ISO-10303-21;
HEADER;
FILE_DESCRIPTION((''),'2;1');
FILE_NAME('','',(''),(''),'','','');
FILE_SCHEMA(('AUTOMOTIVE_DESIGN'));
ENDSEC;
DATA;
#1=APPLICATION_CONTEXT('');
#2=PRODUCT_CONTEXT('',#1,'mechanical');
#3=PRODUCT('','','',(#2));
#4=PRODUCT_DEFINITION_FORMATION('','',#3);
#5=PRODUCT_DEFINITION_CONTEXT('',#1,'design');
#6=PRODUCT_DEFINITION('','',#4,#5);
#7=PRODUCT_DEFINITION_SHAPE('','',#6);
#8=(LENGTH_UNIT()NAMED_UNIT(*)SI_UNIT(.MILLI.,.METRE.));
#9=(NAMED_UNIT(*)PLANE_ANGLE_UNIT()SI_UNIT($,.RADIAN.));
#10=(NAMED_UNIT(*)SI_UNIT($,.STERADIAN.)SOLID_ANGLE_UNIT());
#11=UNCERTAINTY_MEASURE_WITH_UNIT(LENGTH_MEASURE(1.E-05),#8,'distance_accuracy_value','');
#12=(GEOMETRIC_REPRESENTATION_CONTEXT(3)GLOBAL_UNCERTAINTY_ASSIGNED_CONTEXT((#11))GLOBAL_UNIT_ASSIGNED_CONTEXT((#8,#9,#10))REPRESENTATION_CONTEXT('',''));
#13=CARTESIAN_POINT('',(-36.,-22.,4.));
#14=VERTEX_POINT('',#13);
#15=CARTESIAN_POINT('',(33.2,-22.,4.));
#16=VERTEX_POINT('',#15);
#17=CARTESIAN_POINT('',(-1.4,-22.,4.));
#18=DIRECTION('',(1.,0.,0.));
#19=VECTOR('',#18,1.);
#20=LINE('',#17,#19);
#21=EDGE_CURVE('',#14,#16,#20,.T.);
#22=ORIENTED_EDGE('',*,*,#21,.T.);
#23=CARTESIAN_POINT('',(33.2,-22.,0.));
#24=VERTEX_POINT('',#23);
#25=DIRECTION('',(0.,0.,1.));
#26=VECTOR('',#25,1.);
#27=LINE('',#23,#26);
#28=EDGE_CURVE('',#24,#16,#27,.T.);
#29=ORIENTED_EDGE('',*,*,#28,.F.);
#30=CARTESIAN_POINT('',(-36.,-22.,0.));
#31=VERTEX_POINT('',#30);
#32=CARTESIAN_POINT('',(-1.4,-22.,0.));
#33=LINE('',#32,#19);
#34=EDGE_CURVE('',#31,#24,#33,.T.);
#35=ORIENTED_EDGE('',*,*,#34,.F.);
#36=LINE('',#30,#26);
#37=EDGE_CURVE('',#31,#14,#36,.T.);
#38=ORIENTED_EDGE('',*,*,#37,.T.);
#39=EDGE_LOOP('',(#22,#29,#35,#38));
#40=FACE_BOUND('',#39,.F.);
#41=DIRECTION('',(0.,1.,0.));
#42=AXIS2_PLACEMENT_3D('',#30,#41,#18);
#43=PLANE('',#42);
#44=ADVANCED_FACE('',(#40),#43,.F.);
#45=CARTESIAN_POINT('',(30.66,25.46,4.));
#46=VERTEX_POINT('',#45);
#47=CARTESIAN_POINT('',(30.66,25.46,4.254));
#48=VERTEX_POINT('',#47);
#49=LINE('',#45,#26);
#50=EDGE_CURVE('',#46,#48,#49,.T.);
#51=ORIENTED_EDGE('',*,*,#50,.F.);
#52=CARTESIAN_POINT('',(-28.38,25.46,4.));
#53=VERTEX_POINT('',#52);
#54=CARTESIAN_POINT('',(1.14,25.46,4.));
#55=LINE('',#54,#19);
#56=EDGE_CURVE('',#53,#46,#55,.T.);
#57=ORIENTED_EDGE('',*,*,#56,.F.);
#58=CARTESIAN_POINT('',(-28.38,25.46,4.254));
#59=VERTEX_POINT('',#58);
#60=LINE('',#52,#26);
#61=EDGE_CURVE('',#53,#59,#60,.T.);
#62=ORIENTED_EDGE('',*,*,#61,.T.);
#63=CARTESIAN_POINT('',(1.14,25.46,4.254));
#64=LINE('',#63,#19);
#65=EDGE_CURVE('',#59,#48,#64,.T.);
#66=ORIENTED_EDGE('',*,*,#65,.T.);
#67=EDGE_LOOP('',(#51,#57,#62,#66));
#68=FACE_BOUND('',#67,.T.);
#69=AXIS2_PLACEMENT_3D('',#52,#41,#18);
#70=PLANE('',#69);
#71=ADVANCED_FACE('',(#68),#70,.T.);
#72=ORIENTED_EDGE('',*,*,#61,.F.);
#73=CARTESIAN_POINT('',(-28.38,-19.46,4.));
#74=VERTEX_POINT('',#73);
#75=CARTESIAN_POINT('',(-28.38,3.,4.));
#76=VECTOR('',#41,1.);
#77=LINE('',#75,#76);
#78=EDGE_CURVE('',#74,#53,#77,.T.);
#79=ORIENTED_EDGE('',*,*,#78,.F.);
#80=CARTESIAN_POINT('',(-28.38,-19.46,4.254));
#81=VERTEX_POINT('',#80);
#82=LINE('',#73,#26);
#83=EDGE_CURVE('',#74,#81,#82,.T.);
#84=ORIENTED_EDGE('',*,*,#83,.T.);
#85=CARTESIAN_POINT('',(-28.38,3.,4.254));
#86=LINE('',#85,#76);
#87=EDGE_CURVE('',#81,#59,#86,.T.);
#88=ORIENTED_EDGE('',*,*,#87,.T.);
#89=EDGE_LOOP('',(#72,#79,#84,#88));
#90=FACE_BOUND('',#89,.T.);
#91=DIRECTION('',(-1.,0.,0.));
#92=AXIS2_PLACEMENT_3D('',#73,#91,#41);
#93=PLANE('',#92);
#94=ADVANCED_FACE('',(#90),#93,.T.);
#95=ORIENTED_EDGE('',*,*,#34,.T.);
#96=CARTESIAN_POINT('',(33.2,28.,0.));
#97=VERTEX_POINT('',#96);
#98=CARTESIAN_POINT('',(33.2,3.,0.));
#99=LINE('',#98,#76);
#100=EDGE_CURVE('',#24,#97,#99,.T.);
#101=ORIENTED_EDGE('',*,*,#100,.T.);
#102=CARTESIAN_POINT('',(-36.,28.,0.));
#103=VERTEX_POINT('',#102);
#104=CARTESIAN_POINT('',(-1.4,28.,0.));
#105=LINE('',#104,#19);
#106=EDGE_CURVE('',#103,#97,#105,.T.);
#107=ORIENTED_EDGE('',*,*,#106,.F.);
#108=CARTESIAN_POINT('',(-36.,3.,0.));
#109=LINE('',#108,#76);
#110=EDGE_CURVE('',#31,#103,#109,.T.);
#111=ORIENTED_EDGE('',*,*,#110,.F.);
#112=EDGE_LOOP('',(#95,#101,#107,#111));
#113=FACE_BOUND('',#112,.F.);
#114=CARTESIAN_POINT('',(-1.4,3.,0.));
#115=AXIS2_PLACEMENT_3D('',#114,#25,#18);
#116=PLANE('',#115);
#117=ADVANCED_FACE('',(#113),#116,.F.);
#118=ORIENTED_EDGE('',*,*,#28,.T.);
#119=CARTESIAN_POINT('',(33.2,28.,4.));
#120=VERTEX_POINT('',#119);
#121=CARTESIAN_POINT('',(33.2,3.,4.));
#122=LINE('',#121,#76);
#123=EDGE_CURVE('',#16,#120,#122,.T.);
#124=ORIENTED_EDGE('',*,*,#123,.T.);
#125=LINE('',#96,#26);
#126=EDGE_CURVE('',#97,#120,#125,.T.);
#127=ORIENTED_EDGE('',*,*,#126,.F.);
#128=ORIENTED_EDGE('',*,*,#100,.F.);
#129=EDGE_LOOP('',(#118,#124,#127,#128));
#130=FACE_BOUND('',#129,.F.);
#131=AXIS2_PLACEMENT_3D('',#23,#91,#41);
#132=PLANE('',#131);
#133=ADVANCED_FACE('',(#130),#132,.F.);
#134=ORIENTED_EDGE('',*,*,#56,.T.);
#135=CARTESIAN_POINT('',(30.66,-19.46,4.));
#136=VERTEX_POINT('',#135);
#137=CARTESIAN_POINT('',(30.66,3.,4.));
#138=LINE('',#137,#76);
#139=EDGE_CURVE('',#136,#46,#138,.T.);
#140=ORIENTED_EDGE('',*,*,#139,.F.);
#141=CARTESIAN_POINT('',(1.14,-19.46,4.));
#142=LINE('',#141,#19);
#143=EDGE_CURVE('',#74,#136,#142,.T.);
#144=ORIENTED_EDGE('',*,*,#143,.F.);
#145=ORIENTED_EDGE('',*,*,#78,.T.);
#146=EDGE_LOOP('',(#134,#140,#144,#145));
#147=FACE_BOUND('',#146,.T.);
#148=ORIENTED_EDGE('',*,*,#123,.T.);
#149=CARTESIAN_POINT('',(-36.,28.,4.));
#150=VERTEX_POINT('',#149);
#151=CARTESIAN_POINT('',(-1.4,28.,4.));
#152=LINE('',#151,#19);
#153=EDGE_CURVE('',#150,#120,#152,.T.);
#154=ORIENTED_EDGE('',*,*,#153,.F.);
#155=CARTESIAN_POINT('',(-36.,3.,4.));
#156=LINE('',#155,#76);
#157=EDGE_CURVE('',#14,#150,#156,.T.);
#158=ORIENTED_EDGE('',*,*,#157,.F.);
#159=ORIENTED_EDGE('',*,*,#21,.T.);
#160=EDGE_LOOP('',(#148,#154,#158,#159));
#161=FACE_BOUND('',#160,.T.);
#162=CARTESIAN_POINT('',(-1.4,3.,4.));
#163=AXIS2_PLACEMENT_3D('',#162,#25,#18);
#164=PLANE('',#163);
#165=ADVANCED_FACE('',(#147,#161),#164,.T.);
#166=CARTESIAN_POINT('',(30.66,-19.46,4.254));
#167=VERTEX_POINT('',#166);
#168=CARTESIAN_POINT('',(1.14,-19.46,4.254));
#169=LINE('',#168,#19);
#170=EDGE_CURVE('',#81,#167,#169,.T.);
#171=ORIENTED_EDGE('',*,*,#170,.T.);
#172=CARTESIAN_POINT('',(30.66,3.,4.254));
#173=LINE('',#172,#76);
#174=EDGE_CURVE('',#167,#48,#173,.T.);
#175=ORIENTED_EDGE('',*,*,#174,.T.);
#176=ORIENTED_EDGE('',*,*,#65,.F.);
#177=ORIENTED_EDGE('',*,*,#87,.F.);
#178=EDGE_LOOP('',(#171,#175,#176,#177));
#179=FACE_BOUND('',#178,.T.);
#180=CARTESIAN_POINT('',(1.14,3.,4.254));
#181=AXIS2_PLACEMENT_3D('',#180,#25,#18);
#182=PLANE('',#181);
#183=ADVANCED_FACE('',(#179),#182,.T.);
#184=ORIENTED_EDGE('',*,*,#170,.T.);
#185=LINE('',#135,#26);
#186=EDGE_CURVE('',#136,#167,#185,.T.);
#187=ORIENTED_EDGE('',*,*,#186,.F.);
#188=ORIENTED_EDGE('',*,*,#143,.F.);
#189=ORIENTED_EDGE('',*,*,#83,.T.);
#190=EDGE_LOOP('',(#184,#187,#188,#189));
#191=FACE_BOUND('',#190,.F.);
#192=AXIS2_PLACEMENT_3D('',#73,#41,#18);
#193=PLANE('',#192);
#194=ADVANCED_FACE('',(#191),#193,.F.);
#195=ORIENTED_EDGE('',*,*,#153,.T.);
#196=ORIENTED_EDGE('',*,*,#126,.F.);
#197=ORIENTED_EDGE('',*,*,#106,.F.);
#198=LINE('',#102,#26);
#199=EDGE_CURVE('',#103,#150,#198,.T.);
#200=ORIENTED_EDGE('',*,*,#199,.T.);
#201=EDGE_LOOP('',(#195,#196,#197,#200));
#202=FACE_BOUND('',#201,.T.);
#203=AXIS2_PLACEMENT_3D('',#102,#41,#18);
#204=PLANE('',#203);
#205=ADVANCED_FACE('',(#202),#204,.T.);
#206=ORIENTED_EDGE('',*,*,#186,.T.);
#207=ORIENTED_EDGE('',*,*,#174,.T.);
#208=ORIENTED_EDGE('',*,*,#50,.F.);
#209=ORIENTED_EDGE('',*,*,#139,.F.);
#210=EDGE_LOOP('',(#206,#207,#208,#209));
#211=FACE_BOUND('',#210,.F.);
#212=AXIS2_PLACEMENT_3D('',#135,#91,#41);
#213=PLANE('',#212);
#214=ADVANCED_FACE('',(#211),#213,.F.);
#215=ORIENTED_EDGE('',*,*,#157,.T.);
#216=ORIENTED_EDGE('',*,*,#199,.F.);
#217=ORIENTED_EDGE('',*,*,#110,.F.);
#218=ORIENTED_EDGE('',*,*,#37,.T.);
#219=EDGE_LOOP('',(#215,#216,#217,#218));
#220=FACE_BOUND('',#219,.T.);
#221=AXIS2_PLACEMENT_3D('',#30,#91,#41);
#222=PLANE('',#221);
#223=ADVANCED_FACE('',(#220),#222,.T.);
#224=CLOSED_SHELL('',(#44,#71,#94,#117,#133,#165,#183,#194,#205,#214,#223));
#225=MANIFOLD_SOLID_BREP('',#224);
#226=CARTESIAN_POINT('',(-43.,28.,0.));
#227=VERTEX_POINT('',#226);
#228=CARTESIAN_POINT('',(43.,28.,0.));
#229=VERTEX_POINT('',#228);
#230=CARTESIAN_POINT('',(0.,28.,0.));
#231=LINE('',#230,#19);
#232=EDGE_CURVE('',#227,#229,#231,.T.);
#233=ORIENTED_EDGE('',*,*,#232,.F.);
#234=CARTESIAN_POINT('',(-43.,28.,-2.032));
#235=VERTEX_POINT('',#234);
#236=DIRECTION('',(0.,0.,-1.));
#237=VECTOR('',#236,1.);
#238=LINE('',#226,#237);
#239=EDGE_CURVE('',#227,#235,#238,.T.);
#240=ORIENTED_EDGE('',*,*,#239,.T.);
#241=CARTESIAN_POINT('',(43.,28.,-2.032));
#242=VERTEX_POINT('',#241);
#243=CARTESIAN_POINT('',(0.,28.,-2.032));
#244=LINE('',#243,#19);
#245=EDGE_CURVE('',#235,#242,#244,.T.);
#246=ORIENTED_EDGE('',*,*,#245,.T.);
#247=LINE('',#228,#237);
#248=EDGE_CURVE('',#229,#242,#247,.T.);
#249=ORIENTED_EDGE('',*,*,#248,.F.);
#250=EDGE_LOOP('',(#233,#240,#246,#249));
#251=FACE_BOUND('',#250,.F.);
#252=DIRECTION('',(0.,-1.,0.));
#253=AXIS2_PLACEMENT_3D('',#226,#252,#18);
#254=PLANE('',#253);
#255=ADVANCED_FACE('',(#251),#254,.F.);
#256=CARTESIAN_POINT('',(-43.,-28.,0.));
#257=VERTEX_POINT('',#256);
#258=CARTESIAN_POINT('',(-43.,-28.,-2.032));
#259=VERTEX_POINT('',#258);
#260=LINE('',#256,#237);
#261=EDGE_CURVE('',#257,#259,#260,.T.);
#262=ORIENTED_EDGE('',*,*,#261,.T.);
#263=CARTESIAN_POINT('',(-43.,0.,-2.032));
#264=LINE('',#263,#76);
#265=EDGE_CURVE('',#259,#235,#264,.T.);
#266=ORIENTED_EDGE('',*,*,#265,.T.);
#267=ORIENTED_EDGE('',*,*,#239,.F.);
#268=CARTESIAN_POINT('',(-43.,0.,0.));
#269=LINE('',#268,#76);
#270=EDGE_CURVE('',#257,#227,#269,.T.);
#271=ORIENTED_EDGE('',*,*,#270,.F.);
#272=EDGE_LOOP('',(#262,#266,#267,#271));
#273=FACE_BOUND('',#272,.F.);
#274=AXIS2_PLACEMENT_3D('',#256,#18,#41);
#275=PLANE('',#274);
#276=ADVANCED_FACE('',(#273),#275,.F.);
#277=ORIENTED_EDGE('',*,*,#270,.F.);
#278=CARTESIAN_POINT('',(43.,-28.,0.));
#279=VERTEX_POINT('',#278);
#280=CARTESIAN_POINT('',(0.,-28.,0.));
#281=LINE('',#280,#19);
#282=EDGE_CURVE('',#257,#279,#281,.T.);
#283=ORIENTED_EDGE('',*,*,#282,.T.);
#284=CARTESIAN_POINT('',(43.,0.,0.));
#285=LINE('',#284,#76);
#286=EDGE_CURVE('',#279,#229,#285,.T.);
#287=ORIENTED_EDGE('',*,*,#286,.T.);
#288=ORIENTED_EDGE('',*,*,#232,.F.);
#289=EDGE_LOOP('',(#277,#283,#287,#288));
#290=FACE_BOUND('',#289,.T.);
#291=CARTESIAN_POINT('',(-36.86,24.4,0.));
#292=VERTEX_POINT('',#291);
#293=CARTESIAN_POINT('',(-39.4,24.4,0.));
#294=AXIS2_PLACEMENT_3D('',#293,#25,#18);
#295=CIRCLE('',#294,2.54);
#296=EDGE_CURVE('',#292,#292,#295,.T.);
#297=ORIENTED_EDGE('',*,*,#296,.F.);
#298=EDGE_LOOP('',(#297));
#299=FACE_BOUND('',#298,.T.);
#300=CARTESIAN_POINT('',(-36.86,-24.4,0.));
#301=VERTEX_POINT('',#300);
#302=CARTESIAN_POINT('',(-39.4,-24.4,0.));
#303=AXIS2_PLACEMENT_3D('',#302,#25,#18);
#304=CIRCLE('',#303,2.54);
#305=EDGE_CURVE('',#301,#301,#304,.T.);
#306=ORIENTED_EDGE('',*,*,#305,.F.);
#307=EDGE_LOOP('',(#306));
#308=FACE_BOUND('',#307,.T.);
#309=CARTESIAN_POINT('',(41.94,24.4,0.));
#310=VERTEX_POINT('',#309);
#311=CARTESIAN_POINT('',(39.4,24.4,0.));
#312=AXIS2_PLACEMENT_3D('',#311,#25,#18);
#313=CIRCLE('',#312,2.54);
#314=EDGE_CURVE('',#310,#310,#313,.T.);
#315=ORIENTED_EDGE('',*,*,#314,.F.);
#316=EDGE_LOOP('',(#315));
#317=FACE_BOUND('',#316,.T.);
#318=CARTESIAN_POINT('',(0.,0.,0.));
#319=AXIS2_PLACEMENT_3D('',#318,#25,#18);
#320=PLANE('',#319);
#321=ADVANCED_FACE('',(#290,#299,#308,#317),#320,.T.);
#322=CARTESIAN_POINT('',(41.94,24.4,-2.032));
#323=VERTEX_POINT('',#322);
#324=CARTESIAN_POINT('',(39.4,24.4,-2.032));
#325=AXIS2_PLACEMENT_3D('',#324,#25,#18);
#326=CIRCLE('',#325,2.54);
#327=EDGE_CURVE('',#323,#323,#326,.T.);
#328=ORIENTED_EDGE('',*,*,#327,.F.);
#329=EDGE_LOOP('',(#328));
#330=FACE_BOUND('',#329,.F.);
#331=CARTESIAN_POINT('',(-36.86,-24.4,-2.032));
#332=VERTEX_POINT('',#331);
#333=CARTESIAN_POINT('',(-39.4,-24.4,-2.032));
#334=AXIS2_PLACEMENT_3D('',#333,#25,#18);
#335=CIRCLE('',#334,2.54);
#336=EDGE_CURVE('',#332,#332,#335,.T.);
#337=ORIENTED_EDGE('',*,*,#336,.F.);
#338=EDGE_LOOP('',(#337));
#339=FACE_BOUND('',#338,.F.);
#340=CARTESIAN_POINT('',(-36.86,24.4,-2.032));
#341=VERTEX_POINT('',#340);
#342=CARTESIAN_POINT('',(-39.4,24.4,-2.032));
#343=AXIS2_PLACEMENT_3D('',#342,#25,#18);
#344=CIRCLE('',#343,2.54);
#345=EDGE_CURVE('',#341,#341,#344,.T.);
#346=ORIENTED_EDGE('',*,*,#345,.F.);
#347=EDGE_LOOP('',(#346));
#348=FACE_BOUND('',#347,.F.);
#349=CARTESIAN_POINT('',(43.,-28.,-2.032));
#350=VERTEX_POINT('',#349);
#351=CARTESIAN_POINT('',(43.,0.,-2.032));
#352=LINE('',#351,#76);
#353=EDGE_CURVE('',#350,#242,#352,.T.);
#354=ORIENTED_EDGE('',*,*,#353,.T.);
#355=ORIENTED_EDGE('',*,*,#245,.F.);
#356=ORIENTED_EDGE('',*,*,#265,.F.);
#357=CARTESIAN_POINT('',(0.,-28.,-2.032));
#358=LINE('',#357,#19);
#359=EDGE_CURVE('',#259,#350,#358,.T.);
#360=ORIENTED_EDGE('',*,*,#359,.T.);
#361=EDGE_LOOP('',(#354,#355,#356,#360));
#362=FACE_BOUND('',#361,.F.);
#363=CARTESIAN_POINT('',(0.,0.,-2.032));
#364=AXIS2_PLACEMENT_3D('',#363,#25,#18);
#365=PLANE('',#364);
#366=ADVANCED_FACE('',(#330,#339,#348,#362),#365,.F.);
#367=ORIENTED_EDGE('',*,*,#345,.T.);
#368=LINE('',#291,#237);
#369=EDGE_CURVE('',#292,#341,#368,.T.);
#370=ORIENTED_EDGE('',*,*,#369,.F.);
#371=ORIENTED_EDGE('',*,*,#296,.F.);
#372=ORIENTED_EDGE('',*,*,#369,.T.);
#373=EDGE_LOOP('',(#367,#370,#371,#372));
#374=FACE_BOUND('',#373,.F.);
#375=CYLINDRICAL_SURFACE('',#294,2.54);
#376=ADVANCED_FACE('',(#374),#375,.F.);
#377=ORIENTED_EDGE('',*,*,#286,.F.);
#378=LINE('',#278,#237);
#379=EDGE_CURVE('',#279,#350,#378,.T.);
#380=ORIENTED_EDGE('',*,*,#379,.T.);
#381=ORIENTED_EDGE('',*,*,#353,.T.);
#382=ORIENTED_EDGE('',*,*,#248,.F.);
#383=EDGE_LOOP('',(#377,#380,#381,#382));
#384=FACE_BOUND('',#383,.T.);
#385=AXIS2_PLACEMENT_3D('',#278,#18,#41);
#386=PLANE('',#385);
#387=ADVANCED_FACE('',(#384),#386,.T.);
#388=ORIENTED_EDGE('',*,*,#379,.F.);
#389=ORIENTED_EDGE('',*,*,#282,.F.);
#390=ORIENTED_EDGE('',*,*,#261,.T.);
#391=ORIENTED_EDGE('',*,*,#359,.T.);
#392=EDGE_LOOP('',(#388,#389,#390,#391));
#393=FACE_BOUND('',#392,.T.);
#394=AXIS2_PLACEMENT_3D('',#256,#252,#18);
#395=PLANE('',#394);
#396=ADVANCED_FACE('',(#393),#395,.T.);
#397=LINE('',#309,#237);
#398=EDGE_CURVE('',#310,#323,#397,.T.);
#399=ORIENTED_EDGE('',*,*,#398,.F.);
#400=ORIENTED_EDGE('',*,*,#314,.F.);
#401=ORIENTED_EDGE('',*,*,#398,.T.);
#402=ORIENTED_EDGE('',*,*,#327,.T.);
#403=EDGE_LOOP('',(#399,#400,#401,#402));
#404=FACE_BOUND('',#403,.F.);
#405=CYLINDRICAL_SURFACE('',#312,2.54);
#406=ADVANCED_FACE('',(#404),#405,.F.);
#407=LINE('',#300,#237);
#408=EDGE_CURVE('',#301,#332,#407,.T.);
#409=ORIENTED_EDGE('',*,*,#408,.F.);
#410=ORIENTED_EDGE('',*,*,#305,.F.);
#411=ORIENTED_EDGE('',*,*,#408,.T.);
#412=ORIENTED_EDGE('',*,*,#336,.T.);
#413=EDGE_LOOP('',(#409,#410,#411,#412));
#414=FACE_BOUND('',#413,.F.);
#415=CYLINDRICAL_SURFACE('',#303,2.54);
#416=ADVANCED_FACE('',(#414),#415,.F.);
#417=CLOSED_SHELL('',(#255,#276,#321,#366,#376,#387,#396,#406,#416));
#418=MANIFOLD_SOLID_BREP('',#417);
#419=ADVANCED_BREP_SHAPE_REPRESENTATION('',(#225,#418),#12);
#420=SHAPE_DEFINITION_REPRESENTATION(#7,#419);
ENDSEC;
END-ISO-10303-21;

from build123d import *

# Parameters (mm, degrees)
F0_W     = 86
F0_H     = 56
F0_R     = 2.54
F1_DEPTH = 2.032
F2_W     = 69.2
F2_H     = 50
F3_DEPTH = 4
F5_W     = 59.04
F5_H     = 44.92
F6_DEPTH = 0.254


# Not quite as in the source:
# - a feature of the source that left no trace in its solid (it failed there, or was rolled back) is left out


with BuildPart() as f1:
    # F0 (on Top) → F1 (new body)
    with BuildSketch(Plane.XY):
        Rectangle(F0_W, F0_H)
        with Locations((-39.4, -24.4)):
            Circle(F0_R, mode=Mode.SUBTRACT)
        with Locations((-39.4, 24.4)):
            Circle(F0_R, mode=Mode.SUBTRACT)
        with Locations((39.4, 24.4)):
            Circle(F0_R, mode=Mode.SUBTRACT)
    extrude(amount=-F1_DEPTH)


with BuildPart() as f3:
    # F2 (on Top) → F3 (new body)
    with BuildSketch(Plane.XY):
        with Locations((-1.4, 3)):
            Rectangle(F2_W, F2_H)
    extrude(amount=F3_DEPTH)

    # F5 (on face) → F6 (join)
    with BuildSketch(Plane.XY.offset(4)):
        with Locations((1.14, 3)):
            Rectangle(F5_W, F5_H)
    extrude(amount=F6_DEPTH)


solid = Compound([f1.part, f3.part])
